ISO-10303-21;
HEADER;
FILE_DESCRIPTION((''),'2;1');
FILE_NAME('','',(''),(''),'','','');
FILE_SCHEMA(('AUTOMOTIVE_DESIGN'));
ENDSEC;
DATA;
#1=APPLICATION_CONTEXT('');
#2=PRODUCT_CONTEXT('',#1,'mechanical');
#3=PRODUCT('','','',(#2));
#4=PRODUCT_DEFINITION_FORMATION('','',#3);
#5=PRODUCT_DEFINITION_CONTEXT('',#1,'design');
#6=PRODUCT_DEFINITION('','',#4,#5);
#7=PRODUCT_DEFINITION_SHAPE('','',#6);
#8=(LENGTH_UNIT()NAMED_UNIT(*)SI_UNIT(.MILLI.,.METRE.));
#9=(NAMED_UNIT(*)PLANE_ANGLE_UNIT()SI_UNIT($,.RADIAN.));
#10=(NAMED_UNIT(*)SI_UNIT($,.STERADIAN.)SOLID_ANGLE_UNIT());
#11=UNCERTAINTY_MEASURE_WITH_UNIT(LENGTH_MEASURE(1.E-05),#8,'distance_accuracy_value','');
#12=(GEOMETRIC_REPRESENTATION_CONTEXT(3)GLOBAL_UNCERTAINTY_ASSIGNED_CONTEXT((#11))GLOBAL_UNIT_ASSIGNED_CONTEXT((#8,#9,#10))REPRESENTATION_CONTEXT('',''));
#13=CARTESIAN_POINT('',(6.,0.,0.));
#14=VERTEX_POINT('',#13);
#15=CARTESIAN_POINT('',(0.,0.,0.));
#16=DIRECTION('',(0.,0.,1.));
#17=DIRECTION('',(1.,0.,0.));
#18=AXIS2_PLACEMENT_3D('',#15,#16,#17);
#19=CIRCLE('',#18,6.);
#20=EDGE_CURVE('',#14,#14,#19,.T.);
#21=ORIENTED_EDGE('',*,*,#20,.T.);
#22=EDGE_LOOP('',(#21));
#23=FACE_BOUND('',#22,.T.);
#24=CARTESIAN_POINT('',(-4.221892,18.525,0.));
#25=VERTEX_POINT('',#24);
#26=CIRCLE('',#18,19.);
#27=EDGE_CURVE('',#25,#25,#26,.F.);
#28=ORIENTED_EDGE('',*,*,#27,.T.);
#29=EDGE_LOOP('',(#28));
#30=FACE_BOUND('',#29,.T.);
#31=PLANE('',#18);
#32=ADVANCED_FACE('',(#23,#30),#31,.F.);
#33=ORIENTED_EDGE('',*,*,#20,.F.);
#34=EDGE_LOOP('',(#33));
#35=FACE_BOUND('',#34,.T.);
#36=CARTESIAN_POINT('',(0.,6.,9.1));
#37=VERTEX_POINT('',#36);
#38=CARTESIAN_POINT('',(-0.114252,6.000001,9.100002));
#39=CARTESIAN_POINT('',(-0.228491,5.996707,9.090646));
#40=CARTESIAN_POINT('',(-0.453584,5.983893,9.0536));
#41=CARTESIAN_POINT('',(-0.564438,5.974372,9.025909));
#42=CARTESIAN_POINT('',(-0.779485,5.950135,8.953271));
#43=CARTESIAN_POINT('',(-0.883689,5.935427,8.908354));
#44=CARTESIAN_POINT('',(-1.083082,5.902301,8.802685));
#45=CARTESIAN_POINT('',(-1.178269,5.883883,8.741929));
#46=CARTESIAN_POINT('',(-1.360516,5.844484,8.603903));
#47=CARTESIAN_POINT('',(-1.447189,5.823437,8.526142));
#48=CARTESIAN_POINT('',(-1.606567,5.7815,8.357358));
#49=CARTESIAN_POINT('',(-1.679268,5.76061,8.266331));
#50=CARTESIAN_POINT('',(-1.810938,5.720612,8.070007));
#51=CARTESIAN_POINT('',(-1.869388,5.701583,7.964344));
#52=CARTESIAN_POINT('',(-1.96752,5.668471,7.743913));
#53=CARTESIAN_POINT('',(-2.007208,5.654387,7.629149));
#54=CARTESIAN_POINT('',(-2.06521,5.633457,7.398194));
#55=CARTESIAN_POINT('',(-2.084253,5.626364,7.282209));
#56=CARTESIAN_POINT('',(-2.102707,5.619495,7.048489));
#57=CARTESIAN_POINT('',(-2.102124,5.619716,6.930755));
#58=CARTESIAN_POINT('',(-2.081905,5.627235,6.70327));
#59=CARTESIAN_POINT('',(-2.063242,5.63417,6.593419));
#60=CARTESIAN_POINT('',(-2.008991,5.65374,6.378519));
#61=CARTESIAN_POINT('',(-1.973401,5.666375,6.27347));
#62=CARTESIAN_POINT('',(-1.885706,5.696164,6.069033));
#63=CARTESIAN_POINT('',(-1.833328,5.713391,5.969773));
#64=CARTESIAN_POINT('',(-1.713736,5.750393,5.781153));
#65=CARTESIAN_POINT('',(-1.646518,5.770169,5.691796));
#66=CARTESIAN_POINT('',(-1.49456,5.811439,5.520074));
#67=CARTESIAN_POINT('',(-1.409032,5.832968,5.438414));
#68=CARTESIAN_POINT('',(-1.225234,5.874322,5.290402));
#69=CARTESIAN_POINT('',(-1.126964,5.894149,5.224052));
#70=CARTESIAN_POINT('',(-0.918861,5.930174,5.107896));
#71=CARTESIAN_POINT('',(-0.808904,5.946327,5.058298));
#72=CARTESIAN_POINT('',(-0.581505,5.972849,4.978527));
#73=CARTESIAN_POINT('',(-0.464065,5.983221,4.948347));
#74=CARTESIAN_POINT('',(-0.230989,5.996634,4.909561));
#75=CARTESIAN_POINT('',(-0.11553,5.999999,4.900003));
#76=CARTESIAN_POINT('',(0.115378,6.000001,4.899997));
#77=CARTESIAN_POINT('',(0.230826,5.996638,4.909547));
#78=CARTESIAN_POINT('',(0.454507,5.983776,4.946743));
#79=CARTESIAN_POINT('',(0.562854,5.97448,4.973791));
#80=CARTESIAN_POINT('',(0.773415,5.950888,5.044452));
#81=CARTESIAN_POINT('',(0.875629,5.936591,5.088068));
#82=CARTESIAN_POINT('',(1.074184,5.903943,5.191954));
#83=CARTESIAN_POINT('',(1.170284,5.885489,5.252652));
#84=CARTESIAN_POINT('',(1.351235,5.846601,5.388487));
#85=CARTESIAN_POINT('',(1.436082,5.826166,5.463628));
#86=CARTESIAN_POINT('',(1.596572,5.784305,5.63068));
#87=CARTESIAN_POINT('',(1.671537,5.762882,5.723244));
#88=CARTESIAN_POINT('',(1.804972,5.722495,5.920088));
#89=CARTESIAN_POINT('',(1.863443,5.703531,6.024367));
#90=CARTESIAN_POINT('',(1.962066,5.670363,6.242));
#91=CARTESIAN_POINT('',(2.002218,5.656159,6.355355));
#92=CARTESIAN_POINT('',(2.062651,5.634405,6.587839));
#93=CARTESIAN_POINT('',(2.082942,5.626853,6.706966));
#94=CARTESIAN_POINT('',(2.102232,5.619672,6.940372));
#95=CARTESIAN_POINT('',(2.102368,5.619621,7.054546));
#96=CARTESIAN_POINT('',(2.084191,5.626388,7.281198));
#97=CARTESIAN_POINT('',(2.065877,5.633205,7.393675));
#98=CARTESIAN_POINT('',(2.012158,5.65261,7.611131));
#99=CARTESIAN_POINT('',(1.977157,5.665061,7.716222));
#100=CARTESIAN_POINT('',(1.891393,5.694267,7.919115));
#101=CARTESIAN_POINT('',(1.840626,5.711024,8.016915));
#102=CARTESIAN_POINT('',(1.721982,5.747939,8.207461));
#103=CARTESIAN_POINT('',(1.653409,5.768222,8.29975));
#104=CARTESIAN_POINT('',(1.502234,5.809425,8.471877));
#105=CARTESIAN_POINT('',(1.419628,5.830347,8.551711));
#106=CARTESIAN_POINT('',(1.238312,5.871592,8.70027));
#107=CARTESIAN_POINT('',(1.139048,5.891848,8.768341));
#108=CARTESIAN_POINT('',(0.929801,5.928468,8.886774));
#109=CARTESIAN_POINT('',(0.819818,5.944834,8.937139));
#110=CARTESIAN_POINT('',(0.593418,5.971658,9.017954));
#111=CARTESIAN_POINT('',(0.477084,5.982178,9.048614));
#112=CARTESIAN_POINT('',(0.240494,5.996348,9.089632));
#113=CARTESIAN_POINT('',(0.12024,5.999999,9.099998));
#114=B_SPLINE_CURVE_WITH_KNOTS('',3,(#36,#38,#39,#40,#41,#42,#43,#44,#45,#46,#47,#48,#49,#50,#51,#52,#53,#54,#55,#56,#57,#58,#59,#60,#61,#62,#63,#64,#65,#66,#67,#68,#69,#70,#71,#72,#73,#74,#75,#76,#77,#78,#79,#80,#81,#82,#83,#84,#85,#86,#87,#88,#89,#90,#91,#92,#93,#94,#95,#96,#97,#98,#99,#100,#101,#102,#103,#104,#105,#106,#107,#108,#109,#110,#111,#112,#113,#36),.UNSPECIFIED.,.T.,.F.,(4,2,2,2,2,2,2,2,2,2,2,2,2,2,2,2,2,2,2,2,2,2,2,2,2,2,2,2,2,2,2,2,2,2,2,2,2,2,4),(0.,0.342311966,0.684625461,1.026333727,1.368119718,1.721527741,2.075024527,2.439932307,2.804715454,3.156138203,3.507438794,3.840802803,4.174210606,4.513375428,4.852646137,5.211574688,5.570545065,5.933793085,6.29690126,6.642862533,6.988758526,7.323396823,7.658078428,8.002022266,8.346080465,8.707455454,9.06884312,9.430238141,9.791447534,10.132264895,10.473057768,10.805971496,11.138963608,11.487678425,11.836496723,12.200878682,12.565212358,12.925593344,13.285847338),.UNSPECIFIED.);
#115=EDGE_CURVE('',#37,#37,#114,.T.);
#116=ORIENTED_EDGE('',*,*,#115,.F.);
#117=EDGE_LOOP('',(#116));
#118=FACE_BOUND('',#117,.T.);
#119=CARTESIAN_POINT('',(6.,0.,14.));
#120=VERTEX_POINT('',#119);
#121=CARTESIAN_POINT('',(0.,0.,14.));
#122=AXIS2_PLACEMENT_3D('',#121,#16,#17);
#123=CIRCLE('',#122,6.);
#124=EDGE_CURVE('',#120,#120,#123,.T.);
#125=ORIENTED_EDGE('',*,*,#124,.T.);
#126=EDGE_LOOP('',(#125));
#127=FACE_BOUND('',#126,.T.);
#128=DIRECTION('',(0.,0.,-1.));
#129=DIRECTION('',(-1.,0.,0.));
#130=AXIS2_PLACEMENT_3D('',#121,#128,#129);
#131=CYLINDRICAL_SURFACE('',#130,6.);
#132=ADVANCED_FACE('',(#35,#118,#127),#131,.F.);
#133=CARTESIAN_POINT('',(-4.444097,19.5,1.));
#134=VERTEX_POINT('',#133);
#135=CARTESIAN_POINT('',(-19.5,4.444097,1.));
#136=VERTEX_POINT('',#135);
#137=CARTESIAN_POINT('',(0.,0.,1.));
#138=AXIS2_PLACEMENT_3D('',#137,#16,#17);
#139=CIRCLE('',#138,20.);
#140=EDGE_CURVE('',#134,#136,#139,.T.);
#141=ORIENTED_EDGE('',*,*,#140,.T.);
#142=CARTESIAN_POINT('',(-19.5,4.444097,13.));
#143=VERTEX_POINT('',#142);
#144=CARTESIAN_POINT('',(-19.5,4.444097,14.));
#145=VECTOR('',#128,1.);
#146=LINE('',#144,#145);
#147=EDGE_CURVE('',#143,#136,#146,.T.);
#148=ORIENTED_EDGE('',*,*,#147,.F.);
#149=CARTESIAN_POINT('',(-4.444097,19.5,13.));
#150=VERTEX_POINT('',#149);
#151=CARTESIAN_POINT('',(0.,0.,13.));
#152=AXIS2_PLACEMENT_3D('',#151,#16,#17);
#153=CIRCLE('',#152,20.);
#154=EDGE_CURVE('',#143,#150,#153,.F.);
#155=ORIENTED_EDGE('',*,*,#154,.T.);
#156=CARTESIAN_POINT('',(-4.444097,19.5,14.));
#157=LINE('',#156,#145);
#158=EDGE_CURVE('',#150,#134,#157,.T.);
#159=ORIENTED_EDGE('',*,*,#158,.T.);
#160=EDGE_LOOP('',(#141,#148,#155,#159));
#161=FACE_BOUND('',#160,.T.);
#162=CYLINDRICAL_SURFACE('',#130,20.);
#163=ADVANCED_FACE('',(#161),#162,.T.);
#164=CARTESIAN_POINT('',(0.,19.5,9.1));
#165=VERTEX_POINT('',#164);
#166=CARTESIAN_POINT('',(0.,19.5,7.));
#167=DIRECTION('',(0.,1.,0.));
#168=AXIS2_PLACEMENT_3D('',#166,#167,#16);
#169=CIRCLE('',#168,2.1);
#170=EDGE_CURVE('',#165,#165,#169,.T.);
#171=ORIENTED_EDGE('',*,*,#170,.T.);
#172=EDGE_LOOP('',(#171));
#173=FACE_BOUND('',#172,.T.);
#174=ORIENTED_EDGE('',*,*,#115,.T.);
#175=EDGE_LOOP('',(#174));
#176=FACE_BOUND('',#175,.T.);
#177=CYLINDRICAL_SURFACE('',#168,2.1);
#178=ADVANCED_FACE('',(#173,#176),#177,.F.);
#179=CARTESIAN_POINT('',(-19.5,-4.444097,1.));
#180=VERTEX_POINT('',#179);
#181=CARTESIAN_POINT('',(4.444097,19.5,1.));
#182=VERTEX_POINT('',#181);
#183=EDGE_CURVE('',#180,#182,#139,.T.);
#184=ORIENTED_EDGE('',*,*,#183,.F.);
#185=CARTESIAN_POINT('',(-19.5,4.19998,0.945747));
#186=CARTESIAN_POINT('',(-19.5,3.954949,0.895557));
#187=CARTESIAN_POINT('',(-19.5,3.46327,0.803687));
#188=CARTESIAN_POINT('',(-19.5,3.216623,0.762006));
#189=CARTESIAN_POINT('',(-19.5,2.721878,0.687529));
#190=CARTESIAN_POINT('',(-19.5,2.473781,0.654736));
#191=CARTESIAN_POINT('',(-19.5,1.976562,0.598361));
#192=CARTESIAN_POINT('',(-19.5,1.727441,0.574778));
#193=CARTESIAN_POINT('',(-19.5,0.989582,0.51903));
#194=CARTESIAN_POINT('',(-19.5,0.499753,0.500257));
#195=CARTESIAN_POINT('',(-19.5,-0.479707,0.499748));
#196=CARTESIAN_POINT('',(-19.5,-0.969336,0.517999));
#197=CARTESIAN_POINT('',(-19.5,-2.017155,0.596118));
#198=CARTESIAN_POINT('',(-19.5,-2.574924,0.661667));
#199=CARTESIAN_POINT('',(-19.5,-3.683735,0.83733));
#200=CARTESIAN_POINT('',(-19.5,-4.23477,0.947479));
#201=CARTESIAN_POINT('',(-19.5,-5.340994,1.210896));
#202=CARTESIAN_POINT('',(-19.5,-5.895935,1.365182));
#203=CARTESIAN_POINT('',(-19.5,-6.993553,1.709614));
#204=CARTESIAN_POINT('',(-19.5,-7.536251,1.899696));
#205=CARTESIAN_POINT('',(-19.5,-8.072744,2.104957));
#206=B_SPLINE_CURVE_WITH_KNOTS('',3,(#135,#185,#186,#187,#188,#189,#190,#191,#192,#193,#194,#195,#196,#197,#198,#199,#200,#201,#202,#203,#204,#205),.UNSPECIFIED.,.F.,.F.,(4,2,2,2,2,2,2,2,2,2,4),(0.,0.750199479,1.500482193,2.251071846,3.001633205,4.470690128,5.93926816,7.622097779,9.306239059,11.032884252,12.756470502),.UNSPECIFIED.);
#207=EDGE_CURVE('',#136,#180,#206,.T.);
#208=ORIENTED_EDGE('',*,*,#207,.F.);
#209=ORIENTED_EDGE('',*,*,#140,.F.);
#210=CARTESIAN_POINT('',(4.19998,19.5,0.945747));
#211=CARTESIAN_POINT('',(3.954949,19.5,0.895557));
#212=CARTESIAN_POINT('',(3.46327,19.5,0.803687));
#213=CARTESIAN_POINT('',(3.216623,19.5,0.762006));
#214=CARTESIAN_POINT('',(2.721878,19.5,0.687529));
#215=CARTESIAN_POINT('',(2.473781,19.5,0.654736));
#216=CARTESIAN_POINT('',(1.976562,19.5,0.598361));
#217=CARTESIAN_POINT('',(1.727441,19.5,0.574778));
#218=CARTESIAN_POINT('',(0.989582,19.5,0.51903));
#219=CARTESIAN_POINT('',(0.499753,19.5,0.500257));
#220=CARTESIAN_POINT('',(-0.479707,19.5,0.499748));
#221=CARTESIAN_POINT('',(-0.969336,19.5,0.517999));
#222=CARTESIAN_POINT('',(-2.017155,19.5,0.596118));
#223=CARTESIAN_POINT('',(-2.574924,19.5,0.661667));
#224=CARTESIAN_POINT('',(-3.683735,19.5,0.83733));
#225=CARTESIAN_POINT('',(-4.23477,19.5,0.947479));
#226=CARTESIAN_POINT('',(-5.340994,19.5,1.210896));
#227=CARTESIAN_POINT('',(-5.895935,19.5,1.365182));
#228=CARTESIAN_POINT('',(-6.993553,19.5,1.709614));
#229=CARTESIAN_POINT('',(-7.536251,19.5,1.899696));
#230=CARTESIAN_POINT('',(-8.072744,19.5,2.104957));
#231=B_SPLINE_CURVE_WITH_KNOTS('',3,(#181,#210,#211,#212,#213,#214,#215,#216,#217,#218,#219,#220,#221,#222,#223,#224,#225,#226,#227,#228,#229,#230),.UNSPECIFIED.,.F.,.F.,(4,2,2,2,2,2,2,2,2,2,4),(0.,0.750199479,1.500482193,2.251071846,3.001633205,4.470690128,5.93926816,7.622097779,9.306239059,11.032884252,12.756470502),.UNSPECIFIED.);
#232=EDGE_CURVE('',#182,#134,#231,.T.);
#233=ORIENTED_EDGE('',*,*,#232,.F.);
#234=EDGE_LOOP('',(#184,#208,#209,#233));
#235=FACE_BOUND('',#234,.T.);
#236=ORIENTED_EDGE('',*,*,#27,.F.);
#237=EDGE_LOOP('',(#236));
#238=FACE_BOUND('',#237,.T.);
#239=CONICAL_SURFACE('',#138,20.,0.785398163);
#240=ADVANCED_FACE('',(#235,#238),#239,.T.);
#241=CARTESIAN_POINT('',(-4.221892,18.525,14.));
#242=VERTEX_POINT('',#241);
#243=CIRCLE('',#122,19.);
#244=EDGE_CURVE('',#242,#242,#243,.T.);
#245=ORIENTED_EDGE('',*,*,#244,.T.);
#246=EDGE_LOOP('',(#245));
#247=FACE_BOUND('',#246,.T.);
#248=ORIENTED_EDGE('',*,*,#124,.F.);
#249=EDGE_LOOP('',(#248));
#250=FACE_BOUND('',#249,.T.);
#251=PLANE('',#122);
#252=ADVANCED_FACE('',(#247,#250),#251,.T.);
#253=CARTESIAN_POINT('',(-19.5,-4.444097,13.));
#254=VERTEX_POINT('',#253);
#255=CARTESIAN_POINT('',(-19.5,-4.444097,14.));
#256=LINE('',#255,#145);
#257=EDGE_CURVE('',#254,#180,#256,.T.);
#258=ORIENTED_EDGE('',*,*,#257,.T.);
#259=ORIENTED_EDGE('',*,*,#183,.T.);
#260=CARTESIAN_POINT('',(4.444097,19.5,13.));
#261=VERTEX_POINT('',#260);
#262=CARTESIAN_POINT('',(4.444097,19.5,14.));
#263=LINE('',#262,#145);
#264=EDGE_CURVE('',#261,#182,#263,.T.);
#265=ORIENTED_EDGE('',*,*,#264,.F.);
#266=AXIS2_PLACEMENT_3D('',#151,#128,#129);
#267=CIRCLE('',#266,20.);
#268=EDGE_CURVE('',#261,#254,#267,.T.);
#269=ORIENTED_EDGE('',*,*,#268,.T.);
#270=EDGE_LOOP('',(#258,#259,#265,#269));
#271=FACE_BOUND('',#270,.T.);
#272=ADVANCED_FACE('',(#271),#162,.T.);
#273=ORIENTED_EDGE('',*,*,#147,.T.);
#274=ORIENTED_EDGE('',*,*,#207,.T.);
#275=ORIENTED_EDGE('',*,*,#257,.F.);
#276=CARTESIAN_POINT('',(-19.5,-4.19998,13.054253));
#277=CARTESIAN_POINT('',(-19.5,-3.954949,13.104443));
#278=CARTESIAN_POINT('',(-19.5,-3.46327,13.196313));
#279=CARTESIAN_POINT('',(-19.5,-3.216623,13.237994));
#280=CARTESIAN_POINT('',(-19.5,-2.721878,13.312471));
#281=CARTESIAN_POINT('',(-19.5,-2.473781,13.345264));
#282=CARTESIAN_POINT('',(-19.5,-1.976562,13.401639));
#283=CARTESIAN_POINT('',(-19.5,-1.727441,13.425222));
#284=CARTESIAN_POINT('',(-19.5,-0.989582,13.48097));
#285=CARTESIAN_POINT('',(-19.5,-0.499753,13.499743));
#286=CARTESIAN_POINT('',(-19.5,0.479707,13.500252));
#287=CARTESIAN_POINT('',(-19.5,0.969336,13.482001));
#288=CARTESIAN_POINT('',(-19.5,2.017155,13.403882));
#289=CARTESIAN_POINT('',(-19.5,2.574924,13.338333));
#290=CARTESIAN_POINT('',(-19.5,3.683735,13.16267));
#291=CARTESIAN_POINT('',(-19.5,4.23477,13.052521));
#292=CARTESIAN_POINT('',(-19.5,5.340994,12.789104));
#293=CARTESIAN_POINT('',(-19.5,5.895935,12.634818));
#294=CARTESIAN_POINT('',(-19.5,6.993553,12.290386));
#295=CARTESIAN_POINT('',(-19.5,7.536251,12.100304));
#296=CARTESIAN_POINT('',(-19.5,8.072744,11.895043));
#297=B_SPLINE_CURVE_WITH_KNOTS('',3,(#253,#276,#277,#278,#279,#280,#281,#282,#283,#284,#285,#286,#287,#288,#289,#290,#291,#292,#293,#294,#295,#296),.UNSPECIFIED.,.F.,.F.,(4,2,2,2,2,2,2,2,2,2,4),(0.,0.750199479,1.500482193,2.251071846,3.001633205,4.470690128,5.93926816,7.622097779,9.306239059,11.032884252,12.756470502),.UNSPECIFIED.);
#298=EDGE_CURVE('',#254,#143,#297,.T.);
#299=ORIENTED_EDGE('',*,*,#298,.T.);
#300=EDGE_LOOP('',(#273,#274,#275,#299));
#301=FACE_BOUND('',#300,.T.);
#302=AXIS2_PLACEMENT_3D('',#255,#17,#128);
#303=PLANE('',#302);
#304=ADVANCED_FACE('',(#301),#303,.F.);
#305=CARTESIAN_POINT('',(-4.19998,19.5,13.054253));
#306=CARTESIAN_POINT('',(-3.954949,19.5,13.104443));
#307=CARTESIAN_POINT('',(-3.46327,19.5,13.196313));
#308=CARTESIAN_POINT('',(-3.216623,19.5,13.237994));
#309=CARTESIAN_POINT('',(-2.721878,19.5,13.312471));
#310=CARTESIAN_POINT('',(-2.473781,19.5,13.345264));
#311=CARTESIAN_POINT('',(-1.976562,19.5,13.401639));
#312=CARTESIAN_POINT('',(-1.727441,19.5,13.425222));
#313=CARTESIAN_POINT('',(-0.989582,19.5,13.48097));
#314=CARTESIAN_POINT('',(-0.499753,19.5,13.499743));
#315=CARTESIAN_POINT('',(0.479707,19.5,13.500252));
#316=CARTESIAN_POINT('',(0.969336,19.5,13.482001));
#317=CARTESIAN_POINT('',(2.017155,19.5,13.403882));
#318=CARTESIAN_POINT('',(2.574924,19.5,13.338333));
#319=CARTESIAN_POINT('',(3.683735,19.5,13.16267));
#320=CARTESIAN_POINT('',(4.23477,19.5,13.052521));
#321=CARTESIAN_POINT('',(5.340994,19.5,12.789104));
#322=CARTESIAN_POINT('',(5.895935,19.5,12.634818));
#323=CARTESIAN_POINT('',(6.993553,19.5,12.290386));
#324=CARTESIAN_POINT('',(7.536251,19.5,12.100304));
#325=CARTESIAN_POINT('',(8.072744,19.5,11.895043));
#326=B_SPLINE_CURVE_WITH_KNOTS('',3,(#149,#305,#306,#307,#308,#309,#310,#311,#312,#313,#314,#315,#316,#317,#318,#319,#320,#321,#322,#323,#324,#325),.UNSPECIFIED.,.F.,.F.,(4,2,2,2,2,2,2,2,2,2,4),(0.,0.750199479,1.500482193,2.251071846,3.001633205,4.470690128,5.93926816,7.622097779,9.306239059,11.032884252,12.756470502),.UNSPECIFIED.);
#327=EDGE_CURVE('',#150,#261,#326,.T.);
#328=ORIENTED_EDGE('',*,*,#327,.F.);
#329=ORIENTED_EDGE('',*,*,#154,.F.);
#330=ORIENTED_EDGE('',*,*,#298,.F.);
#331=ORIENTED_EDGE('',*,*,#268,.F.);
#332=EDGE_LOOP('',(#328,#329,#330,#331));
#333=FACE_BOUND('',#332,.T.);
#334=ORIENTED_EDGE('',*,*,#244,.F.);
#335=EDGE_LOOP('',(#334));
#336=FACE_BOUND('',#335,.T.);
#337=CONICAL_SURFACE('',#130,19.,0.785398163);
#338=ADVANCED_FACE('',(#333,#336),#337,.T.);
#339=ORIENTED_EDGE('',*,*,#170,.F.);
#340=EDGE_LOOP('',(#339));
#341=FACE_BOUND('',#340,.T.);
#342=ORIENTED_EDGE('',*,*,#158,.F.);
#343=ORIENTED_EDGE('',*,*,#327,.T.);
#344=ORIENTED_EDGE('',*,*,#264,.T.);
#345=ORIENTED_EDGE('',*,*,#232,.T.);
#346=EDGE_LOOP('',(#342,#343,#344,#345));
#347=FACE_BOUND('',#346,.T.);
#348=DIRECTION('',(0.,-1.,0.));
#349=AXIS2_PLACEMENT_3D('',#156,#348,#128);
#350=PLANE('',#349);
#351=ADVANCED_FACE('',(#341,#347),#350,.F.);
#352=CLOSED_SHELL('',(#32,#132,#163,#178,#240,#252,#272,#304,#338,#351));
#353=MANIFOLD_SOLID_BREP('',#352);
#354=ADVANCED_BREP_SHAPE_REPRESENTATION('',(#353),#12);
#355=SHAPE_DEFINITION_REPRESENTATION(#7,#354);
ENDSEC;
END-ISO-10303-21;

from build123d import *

# Parameters (mm, degrees)
SKETCH1_R              = 6
BOSS_EXTRUDE1_DEPTH    = 14
M5_TAPPED_HOLE1_REACH  = 48.435
M5_TAPPED_HOLE1_BORE_R = 2.1
CHAMFER1_SIZE          = 1


with BuildPart() as part:
    # Sketch1 → Boss-Extrude1 (new body)
    with BuildSketch(Plane.XY):
        with BuildLine():
            Line((-4.444097209, 19.5), (4.444097209, 19.5))
            ThreePointArc((4.444097209, 19.5), (14.142135624, -14.142135624), (-19.5, -4.444097209))
            Line((-19.5, -4.444097209), (-19.5, 4.444097209))
            ThreePointArc((-19.5, 4.444097209), (-14.142135624, 14.142135624), (-4.444097209, 19.5))
        make_face()
        Circle(SKETCH1_R, mode=Mode.SUBTRACT)
    extrude(amount=BOSS_EXTRUDE1_DEPTH)

    # M5 Tapped Hole1 bore → M5 Tapped Hole1 (cut, up to next)
    with BuildSketch(Plane(origin=(0, 19.5, 0), x_dir=(1, 0, 0), z_dir=(0, 1, 0)), mode=Mode.PRIVATE) as m5_tapped_hole1_sk1:
        with Locations((0, -7)):
            Circle(M5_TAPPED_HOLE1_BORE_R)
    m5_tapped_hole1_tool1 = extrude(m5_tapped_hole1_sk1.sketch, amount=-M5_TAPPED_HOLE1_REACH, mode=Mode.PRIVATE) & part.part
    add(m5_tapped_hole1_tool1.solids().sort_by_distance((0, 19.5, 7))[0], mode=Mode.SUBTRACT)

    # Chamfer1
    chamfer1_edges = [part.edges().sort_by_distance(p)[0] for p in [
        (14.142135624, -14.142135624, 0),
    ]]
    chamfer(chamfer1_edges, length=CHAMFER1_SIZE)
    chamfer1_2_edges = [part.edges().sort_by_distance(p)[0] for p in [
        (14.142135624, -14.142135624, 14),
    ]]
    chamfer(chamfer1_2_edges, length=CHAMFER1_SIZE)
    chamfer1_3_edges = [part.edges().sort_by_distance(p)[0] for p in [
        (-14.142135624, 14.142135624, 0),
    ]]
    chamfer(chamfer1_3_edges, length=CHAMFER1_SIZE - 0.0001)  # a hair under: the kernel refuses the full size
    chamfer1_4_edges = [part.edges().sort_by_distance(p)[0] for p in [
        (-14.142135624, 14.142135624, 14),
    ]]
    chamfer(chamfer1_4_edges, length=CHAMFER1_SIZE - 0.0001)  # a hair under: the kernel refuses the full size


solid = part.part
